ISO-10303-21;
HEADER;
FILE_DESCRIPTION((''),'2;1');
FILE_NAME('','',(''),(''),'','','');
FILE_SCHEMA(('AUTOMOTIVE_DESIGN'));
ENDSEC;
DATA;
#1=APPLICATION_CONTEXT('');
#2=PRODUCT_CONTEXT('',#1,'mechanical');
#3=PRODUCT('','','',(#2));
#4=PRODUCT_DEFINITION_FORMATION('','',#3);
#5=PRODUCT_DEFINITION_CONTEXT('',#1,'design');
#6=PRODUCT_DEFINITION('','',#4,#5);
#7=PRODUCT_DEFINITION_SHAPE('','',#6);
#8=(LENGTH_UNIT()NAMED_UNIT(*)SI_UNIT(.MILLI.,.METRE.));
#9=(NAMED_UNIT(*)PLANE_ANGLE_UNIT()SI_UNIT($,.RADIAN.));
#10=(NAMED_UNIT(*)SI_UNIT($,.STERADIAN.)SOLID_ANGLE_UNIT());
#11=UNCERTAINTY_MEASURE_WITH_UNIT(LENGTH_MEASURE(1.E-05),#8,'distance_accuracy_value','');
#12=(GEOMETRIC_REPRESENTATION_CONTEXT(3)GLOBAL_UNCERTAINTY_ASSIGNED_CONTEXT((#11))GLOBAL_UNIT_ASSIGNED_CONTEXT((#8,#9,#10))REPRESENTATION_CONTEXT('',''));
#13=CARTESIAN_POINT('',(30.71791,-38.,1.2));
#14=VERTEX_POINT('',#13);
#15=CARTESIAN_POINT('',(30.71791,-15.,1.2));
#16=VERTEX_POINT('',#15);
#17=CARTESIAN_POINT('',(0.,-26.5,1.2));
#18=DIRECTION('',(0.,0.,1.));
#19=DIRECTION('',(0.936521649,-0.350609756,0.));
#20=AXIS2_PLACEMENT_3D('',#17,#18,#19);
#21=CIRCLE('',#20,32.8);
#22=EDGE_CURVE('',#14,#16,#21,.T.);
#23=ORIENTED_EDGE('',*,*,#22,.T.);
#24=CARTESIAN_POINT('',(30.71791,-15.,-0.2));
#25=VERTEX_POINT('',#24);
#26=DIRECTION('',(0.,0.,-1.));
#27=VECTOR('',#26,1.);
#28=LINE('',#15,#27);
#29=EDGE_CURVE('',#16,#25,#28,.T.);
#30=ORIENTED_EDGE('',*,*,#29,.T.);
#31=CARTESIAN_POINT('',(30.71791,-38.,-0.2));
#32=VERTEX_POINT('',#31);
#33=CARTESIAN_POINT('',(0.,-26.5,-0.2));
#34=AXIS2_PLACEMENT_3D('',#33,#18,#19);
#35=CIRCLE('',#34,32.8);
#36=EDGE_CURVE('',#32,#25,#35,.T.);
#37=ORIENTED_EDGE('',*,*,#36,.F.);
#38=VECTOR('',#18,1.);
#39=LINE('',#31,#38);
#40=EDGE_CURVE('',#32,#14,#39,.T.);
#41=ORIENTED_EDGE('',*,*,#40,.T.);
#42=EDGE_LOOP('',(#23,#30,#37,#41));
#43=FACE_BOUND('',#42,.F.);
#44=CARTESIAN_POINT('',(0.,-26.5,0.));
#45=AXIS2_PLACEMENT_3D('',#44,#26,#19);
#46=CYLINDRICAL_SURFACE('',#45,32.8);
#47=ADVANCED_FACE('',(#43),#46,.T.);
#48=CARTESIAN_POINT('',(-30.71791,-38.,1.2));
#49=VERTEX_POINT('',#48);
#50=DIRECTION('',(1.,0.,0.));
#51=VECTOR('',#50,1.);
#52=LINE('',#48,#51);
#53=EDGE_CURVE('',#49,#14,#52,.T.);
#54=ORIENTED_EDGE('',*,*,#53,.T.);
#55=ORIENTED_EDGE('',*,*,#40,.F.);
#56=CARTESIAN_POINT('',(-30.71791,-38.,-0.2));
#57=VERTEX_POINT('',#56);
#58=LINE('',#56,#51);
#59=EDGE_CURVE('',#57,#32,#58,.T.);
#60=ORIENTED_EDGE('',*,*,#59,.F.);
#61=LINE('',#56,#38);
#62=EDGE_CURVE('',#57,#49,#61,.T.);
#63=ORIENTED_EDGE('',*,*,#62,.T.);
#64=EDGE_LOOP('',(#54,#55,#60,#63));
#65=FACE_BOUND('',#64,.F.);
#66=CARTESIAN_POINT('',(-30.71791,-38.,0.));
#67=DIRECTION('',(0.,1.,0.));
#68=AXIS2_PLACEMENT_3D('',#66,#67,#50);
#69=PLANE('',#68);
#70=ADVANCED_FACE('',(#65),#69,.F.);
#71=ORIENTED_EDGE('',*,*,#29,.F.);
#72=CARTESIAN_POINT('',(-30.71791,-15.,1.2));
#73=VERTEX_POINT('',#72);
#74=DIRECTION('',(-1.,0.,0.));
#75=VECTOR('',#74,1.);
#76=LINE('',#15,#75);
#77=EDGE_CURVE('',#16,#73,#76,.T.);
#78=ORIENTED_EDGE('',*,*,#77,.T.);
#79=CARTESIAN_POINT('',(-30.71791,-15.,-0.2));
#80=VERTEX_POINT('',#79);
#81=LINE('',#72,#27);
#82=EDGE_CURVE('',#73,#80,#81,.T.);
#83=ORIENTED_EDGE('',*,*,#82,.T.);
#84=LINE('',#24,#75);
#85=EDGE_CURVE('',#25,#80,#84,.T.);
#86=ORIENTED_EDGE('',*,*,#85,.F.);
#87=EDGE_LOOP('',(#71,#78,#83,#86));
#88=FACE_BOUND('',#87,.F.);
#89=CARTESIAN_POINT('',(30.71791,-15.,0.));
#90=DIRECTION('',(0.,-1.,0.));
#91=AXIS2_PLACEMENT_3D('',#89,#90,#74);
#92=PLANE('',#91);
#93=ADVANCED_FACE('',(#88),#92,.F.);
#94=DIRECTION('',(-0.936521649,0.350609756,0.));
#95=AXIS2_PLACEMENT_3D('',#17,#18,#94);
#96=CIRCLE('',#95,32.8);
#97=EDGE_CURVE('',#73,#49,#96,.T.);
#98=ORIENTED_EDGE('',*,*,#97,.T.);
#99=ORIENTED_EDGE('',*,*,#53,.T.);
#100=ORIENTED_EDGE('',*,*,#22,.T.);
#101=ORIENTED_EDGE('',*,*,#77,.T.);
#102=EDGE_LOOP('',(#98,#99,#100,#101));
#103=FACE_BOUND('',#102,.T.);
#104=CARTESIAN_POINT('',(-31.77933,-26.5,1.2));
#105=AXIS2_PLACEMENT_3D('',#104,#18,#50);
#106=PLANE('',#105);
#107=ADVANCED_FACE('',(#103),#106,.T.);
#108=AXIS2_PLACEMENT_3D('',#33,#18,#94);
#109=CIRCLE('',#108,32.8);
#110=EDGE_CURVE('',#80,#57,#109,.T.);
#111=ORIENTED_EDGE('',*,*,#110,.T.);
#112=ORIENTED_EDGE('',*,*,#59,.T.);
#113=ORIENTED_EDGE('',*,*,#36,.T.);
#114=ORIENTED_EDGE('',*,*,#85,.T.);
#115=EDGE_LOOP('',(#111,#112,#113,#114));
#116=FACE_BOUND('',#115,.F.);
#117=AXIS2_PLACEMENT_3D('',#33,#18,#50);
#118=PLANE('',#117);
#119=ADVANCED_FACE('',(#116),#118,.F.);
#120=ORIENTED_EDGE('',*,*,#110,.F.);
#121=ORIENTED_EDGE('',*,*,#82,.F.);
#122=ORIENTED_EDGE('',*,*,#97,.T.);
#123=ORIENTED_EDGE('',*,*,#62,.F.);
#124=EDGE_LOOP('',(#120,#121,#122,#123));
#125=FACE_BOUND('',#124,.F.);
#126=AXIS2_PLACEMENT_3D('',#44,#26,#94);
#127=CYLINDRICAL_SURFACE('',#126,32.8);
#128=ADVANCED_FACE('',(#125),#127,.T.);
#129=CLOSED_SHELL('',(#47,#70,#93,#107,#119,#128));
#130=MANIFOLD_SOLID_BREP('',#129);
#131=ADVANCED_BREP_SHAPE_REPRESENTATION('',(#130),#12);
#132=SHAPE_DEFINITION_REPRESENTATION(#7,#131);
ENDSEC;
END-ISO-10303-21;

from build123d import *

# Parameters (mm, degrees)
F1_DEPTH = 0.2
F2_DEPTH = 1.2


# Not quite as in the source:
# - a feature names something its author has since deleted; it is built from what else it names


with BuildPart() as f1:
    # F0 (on Top) → F1 (new body)
    with BuildSketch(Plane.XY):
        with BuildLine():
            Line((0, -15), (-30.3973683071, -15))
            ThreePointArc((-30.3973683071, -15), (-32.5, -26.5), (-30.3973683071, -38))
            Line((-30.3973683071, -38), (0, -38))
            Line((0, -38), (30.3973683071, -38))
            ThreePointArc((30.3973683071, -38), (32.5, -26.5), (30.3973683071, -15))
            Line((30.3973683071, -15), (0, -15))
        make_face()
        with BuildLine():
            Line((30.7179100852, -15), (30.3973683071, -15))
            ThreePointArc((30.3973683071, -15), (32.5, -26.5), (30.3973683071, -38))
            Line((30.3973683071, -38), (30.7179100852, -38))
            ThreePointArc((30.7179100852, -38), (32.8, -26.5), (30.7179100852, -15))
        make_face()
        with BuildLine():
            ThreePointArc((-30.3973683071, -38), (-32.5, -26.5), (-30.3973683071, -15))
            Line((-30.3973683071, -15), (-30.7179100852, -15))
            ThreePointArc((-30.7179100852, -15), (-32.8, -26.5), (-30.7179100852, -38))
            Line((-30.7179100852, -38), (-30.3973683071, -38))
        make_face()
    extrude(amount=-F1_DEPTH)

    # F0 (on Top) → F2 (join)
    with BuildSketch(Plane.XY):
        with BuildLine():
            ThreePointArc((-30.3973683071, -38), (-32.5, -26.5), (-30.3973683071, -15))
            Line((-30.3973683071, -15), (-30.7179100852, -15))
            ThreePointArc((-30.7179100852, -15), (-32.8, -26.5), (-30.7179100852, -38))
            Line((-30.7179100852, -38), (-30.3973683071, -38))
        make_face()
        with BuildLine():
            Line((30.7179100852, -15), (30.3973683071, -15))
            ThreePointArc((30.3973683071, -15), (32.5, -26.5), (30.3973683071, -38))
            Line((30.3973683071, -38), (30.7179100852, -38))
            ThreePointArc((30.7179100852, -38), (32.8, -26.5), (30.7179100852, -15))
        make_face()
        with BuildLine():
            Line((0, -15), (-30.3973683071, -15))
            ThreePointArc((-30.3973683071, -15), (-32.5, -26.5), (-30.3973683071, -38))
            Line((-30.3973683071, -38), (0, -38))
            Line((0, -38), (30.3973683071, -38))
            ThreePointArc((30.3973683071, -38), (32.5, -26.5), (30.3973683071, -15))
            Line((30.3973683071, -15), (0, -15))
        make_face()
    extrude(amount=F2_DEPTH)


solid = f1.part
